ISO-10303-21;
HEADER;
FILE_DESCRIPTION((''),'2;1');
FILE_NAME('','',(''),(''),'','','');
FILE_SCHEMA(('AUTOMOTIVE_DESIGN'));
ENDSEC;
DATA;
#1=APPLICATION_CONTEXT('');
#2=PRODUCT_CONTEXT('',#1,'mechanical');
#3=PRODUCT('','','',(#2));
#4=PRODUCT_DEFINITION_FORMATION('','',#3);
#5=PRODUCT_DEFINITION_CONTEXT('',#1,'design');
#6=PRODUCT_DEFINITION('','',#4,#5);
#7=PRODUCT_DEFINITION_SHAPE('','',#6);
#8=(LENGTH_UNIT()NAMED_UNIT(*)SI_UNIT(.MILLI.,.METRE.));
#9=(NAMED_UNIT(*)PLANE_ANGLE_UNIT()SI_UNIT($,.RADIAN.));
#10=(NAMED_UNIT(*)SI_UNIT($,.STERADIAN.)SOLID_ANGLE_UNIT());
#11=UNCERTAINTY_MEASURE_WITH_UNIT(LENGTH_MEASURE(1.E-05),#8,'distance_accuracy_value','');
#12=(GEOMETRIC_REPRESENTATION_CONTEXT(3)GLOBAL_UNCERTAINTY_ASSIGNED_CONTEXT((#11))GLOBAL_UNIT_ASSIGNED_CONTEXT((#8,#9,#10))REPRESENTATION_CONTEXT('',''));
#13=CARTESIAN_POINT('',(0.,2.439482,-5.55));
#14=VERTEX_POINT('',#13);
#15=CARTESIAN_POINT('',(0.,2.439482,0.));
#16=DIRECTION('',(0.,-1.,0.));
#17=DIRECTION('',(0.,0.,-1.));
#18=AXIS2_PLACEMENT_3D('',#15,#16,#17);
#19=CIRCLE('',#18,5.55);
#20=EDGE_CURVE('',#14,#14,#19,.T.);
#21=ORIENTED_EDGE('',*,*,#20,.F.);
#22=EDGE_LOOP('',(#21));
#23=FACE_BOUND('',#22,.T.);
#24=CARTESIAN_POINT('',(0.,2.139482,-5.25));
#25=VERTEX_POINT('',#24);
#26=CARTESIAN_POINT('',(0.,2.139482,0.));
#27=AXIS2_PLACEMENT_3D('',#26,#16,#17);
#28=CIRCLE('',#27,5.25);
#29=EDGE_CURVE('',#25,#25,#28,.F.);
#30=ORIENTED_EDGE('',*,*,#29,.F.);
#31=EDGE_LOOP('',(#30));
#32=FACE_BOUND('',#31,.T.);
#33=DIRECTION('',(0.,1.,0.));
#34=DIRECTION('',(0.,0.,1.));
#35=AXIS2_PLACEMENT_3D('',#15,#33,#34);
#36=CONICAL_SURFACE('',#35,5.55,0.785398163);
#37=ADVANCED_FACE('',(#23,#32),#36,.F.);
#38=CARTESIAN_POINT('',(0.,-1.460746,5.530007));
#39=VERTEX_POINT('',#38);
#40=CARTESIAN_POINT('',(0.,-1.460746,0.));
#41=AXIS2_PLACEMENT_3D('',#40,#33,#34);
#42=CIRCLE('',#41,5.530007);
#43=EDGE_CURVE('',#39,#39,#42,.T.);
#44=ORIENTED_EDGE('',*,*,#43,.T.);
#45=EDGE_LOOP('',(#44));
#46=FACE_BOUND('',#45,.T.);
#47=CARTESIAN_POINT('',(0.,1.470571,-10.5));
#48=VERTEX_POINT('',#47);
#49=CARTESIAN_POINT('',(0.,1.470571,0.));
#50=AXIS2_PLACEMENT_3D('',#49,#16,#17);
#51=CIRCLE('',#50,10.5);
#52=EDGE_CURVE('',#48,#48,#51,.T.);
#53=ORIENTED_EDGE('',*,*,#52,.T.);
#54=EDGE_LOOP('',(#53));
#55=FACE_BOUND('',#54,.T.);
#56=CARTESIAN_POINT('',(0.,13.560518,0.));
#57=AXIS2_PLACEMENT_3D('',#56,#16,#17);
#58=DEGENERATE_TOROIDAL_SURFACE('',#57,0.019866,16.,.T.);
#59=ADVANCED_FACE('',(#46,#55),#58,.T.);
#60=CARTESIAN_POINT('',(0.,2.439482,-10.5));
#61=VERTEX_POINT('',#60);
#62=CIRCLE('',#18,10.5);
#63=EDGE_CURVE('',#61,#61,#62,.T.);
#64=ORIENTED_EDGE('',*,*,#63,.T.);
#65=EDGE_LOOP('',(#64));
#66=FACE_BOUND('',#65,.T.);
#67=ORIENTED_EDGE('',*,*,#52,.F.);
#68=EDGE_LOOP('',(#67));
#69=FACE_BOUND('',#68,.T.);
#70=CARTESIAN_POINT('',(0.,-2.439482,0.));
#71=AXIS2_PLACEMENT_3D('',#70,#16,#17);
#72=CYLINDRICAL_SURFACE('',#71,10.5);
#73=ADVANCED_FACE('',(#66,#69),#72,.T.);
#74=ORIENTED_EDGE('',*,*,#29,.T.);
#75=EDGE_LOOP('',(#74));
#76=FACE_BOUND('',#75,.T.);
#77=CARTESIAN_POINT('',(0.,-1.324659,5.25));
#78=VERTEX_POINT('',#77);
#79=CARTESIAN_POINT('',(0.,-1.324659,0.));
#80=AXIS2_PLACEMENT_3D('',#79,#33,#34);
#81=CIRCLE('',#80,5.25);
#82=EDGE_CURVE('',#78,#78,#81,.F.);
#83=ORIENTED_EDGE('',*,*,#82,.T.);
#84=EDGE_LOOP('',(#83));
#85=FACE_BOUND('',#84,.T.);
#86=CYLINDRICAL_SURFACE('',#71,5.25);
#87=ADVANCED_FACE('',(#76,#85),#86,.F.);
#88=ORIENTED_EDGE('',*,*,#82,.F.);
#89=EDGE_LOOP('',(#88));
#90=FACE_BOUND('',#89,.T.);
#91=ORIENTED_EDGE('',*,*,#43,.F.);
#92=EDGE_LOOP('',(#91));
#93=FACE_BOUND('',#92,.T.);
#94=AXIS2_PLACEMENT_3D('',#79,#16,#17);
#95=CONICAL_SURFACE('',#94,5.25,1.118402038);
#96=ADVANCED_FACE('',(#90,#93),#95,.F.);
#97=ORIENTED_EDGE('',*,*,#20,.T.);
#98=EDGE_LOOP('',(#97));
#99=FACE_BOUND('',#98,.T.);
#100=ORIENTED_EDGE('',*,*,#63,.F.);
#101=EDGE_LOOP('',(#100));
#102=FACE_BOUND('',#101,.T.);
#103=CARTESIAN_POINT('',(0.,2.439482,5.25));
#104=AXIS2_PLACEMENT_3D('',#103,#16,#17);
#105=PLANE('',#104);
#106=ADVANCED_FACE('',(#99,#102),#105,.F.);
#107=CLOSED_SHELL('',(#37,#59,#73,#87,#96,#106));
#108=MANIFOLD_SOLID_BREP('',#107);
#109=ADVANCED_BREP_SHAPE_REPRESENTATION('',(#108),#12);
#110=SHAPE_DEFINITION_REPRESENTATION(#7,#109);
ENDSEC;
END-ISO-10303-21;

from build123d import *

# Parameters (mm, degrees)
CHAMFER_1_SIZE   = 0.23585869
CHAMFER_1_SIZE_2 = 0.3


with BuildPart() as part:
    # 草图1 → 旋转1 (revolve)
    with BuildSketch(Plane(origin=(0, 0, 0), x_dir=(0, 0, -1), z_dir=(1, 0, 0)), mode=Mode.PRIVATE) as revolve_1_sk:
        with BuildLine():
            Line((-5.25, 2.439482462), (-10.5, 2.439482462))
            Line((-10.5, 2.439482462), (-10.5, 1.470571375))
            ThreePointArc((-10.5, 1.470571375), (-8.019866328, -0.295888922), (-5.25, -1.560517538))
            Line((-5.25, -1.560517538), (-5.25, 2.439482462))
        make_face()
    revolve(revolve_1_sk.sketch.rotate(Axis((0, -2.439482462, 0), (0, 1, 0)), 180), axis=Axis((0, -2.439482462, 0), (0, 1, 0)))

    # 倒角1
    # the kernel refuses this chamfer: 0.3, 0.23585869 mm, written as the material it takes off along each edge
    with BuildSketch(Plane(origin=(0, -1.560517538, 0), x_dir=(0, 0, -1), z_dir=(1, 0, 0))) as chamfer_1_piece_1:
        with BuildLine():
            Line((5.25, CHAMFER_1_SIZE), (5.5300073, 0.099771931))
            ThreePointArc((5.5300073, 0.099771931), (5.394193497, 0.050646644), (5.25, 0))
            Line((5.25, 0), (5.25, CHAMFER_1_SIZE))
        make_face()
    revolve(axis=Axis((0, -1.560517538, 0), (0, 1, 0)), mode=Mode.SUBTRACT)
    with BuildSketch(Plane(origin=(0, 2.439482462, 0), x_dir=(0, 0, -1), z_dir=(1, 0, 0))) as chamfer_1_piece_2:
        Polygon((5.25, -CHAMFER_1_SIZE_2), (5.25 + CHAMFER_1_SIZE_2, 0), (5.25, 0), align=None)
    revolve(axis=Axis((0, 2.439482462, 0), (0, 1, 0)), mode=Mode.SUBTRACT)


solid = part.part
